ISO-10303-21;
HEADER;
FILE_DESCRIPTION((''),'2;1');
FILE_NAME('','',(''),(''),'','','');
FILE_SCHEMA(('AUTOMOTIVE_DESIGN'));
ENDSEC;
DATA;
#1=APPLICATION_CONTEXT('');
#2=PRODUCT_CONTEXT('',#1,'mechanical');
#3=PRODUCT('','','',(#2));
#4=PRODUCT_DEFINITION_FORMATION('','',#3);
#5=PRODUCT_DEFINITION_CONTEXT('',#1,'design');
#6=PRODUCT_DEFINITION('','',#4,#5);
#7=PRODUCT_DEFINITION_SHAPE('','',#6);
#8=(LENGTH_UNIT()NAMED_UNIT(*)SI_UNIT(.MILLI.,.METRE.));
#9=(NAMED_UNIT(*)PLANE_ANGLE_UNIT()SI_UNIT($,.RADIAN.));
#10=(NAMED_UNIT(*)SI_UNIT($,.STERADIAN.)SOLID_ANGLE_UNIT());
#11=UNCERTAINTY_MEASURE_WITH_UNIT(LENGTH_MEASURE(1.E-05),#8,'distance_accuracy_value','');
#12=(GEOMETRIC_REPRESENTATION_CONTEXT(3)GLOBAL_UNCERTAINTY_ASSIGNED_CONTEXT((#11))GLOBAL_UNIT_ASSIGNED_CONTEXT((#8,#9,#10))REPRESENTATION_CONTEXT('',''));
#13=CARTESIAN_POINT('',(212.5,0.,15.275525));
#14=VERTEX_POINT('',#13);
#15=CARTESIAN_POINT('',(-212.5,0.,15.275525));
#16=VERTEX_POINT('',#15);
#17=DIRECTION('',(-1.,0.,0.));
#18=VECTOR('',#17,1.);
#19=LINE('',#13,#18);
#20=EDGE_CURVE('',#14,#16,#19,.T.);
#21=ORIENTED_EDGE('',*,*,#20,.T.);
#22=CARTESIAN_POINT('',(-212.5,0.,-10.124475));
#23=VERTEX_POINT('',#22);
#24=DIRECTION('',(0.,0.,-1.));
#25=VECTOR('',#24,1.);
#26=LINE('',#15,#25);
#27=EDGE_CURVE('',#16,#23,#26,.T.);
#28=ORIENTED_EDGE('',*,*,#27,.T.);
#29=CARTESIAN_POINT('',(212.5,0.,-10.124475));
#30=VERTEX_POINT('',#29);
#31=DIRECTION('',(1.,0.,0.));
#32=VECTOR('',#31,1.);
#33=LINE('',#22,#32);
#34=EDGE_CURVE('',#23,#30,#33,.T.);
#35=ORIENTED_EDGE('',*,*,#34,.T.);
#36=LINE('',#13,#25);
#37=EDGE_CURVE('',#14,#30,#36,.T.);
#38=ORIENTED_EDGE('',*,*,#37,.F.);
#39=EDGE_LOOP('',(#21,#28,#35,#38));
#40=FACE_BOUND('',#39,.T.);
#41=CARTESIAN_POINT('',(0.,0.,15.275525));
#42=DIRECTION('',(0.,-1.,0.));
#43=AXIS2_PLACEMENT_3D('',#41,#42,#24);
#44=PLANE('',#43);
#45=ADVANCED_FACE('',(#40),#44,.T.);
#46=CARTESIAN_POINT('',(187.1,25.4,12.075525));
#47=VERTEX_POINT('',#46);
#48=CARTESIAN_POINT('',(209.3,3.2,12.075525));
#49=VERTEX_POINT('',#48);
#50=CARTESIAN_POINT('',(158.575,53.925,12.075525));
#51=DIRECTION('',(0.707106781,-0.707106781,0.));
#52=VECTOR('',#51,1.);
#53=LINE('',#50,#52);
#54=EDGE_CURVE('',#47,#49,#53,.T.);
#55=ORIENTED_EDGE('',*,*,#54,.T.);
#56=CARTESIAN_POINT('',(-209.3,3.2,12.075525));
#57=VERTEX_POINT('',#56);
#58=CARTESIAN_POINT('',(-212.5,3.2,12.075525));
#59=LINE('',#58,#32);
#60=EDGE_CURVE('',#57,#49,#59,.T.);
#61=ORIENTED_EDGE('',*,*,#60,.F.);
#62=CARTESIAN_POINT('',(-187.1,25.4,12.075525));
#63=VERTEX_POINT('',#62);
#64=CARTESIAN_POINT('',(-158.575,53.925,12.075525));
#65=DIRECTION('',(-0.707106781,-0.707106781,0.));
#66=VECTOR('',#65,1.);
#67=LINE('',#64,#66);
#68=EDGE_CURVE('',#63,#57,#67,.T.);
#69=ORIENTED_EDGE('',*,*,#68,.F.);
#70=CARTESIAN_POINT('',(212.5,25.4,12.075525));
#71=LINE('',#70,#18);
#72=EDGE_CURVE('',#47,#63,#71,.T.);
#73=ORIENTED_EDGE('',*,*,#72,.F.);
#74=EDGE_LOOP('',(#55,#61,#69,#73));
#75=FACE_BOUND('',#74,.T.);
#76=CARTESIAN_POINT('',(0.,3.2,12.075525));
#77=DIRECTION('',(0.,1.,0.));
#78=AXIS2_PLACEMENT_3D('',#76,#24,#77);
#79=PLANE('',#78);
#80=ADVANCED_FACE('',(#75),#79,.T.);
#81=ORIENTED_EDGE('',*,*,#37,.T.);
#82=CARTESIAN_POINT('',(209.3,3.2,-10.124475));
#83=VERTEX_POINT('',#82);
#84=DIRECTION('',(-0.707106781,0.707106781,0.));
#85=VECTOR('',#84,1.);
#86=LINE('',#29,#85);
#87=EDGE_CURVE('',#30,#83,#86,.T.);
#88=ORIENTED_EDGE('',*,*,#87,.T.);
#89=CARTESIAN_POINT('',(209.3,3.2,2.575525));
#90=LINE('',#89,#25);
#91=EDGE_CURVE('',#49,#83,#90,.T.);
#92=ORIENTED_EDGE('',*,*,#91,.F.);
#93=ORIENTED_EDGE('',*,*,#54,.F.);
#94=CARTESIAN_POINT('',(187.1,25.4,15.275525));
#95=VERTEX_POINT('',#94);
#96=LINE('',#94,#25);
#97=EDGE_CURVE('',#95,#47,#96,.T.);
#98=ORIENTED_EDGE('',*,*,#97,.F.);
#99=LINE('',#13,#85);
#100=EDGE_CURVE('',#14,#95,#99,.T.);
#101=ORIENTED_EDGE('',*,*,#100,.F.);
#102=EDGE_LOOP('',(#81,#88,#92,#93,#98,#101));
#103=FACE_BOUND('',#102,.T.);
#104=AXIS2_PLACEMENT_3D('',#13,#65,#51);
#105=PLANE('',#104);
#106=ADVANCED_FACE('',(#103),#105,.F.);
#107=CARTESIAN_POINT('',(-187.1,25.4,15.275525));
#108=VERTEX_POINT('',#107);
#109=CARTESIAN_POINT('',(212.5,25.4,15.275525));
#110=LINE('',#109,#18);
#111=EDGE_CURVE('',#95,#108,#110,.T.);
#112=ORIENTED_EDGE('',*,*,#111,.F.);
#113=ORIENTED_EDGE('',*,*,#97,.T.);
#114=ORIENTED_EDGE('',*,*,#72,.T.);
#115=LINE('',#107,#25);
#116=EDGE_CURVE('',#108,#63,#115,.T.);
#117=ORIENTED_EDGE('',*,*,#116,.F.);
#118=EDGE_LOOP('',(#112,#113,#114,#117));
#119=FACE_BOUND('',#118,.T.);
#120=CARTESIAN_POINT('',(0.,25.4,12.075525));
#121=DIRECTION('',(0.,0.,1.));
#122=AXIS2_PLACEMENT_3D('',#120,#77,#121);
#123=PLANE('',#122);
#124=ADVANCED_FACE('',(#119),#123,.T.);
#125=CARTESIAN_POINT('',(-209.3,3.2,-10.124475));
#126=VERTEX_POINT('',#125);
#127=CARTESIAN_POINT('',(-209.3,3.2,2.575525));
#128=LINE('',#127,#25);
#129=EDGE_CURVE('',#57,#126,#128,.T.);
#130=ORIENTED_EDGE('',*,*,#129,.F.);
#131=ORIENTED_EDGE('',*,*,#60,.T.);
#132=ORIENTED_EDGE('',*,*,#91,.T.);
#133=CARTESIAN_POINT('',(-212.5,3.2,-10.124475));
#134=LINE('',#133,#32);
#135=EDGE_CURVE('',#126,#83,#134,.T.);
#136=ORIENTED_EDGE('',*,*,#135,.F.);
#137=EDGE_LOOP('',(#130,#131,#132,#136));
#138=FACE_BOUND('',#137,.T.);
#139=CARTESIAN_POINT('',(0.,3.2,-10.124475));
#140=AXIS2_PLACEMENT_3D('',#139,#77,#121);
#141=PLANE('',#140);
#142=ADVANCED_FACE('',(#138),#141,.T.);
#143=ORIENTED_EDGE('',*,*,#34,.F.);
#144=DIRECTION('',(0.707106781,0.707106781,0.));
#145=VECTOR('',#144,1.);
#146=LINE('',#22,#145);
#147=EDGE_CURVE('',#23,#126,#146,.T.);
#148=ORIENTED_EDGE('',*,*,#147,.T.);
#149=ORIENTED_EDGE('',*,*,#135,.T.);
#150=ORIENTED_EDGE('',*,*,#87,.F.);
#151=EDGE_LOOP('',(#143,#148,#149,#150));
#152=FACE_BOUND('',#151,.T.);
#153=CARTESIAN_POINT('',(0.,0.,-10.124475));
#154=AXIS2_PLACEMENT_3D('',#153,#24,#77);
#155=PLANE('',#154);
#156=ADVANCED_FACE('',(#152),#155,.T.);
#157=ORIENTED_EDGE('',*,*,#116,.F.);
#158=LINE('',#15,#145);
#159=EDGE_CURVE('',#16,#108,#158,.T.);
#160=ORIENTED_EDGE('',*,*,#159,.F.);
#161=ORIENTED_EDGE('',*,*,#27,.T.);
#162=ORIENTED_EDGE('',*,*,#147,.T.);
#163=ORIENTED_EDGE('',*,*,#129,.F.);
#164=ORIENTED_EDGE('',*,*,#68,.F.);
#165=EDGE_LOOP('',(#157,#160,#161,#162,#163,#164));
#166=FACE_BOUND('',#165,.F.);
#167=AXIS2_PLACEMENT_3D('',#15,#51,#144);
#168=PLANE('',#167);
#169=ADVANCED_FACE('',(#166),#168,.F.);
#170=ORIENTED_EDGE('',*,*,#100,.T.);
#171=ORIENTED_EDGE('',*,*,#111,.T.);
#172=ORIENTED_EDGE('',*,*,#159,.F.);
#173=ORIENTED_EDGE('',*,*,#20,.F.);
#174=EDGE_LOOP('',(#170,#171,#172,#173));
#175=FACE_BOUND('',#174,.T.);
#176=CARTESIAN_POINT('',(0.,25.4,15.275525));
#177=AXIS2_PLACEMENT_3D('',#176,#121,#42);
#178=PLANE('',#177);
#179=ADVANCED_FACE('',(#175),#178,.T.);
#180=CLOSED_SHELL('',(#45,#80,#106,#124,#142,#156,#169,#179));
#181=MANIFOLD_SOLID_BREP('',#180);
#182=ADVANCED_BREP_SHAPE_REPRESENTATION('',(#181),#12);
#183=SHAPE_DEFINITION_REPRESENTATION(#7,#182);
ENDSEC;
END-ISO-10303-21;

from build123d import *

# Parameters (mm, degrees)
F1_DEPTH = 212.5
F3_DEPTH = 25.4


# Not quite as in the source:
# - a pattern or mirror of a feature is missing from the dataset's text; its kind, count and spacing are read off the source's solid


with BuildPart() as f1:
    # F0 (on Right) → F1 (new body, symmetric)
    with BuildSketch(Plane.YZ):
        Polygon((0, 15.2755248485), (0, -10.1244751515), (3.2, -10.1244751515), (3.2, 12.0755248485), (25.4, 12.0755248485), (25.4, 15.2755248485), align=None)
    extrude(amount=F1_DEPTH, both=True)

    # F2 (on face) → F3 (cut)
    with BuildSketch(Plane.XY.offset(15.2755248485)):
        Polygon((-212.5, 25.4), (-212.5, 0), (-187.1, 25.4), align=None)
    f3 = extrude(amount=-F3_DEPTH, mode=Mode.SUBTRACT)

    # F3_copies: F3 across plane
    add(f3.mirror(Plane(origin=(0, 0, 0), x_dir=(0, 0, 1), z_dir=(1, 0, 0))), mode=Mode.SUBTRACT)


solid = f1.part
